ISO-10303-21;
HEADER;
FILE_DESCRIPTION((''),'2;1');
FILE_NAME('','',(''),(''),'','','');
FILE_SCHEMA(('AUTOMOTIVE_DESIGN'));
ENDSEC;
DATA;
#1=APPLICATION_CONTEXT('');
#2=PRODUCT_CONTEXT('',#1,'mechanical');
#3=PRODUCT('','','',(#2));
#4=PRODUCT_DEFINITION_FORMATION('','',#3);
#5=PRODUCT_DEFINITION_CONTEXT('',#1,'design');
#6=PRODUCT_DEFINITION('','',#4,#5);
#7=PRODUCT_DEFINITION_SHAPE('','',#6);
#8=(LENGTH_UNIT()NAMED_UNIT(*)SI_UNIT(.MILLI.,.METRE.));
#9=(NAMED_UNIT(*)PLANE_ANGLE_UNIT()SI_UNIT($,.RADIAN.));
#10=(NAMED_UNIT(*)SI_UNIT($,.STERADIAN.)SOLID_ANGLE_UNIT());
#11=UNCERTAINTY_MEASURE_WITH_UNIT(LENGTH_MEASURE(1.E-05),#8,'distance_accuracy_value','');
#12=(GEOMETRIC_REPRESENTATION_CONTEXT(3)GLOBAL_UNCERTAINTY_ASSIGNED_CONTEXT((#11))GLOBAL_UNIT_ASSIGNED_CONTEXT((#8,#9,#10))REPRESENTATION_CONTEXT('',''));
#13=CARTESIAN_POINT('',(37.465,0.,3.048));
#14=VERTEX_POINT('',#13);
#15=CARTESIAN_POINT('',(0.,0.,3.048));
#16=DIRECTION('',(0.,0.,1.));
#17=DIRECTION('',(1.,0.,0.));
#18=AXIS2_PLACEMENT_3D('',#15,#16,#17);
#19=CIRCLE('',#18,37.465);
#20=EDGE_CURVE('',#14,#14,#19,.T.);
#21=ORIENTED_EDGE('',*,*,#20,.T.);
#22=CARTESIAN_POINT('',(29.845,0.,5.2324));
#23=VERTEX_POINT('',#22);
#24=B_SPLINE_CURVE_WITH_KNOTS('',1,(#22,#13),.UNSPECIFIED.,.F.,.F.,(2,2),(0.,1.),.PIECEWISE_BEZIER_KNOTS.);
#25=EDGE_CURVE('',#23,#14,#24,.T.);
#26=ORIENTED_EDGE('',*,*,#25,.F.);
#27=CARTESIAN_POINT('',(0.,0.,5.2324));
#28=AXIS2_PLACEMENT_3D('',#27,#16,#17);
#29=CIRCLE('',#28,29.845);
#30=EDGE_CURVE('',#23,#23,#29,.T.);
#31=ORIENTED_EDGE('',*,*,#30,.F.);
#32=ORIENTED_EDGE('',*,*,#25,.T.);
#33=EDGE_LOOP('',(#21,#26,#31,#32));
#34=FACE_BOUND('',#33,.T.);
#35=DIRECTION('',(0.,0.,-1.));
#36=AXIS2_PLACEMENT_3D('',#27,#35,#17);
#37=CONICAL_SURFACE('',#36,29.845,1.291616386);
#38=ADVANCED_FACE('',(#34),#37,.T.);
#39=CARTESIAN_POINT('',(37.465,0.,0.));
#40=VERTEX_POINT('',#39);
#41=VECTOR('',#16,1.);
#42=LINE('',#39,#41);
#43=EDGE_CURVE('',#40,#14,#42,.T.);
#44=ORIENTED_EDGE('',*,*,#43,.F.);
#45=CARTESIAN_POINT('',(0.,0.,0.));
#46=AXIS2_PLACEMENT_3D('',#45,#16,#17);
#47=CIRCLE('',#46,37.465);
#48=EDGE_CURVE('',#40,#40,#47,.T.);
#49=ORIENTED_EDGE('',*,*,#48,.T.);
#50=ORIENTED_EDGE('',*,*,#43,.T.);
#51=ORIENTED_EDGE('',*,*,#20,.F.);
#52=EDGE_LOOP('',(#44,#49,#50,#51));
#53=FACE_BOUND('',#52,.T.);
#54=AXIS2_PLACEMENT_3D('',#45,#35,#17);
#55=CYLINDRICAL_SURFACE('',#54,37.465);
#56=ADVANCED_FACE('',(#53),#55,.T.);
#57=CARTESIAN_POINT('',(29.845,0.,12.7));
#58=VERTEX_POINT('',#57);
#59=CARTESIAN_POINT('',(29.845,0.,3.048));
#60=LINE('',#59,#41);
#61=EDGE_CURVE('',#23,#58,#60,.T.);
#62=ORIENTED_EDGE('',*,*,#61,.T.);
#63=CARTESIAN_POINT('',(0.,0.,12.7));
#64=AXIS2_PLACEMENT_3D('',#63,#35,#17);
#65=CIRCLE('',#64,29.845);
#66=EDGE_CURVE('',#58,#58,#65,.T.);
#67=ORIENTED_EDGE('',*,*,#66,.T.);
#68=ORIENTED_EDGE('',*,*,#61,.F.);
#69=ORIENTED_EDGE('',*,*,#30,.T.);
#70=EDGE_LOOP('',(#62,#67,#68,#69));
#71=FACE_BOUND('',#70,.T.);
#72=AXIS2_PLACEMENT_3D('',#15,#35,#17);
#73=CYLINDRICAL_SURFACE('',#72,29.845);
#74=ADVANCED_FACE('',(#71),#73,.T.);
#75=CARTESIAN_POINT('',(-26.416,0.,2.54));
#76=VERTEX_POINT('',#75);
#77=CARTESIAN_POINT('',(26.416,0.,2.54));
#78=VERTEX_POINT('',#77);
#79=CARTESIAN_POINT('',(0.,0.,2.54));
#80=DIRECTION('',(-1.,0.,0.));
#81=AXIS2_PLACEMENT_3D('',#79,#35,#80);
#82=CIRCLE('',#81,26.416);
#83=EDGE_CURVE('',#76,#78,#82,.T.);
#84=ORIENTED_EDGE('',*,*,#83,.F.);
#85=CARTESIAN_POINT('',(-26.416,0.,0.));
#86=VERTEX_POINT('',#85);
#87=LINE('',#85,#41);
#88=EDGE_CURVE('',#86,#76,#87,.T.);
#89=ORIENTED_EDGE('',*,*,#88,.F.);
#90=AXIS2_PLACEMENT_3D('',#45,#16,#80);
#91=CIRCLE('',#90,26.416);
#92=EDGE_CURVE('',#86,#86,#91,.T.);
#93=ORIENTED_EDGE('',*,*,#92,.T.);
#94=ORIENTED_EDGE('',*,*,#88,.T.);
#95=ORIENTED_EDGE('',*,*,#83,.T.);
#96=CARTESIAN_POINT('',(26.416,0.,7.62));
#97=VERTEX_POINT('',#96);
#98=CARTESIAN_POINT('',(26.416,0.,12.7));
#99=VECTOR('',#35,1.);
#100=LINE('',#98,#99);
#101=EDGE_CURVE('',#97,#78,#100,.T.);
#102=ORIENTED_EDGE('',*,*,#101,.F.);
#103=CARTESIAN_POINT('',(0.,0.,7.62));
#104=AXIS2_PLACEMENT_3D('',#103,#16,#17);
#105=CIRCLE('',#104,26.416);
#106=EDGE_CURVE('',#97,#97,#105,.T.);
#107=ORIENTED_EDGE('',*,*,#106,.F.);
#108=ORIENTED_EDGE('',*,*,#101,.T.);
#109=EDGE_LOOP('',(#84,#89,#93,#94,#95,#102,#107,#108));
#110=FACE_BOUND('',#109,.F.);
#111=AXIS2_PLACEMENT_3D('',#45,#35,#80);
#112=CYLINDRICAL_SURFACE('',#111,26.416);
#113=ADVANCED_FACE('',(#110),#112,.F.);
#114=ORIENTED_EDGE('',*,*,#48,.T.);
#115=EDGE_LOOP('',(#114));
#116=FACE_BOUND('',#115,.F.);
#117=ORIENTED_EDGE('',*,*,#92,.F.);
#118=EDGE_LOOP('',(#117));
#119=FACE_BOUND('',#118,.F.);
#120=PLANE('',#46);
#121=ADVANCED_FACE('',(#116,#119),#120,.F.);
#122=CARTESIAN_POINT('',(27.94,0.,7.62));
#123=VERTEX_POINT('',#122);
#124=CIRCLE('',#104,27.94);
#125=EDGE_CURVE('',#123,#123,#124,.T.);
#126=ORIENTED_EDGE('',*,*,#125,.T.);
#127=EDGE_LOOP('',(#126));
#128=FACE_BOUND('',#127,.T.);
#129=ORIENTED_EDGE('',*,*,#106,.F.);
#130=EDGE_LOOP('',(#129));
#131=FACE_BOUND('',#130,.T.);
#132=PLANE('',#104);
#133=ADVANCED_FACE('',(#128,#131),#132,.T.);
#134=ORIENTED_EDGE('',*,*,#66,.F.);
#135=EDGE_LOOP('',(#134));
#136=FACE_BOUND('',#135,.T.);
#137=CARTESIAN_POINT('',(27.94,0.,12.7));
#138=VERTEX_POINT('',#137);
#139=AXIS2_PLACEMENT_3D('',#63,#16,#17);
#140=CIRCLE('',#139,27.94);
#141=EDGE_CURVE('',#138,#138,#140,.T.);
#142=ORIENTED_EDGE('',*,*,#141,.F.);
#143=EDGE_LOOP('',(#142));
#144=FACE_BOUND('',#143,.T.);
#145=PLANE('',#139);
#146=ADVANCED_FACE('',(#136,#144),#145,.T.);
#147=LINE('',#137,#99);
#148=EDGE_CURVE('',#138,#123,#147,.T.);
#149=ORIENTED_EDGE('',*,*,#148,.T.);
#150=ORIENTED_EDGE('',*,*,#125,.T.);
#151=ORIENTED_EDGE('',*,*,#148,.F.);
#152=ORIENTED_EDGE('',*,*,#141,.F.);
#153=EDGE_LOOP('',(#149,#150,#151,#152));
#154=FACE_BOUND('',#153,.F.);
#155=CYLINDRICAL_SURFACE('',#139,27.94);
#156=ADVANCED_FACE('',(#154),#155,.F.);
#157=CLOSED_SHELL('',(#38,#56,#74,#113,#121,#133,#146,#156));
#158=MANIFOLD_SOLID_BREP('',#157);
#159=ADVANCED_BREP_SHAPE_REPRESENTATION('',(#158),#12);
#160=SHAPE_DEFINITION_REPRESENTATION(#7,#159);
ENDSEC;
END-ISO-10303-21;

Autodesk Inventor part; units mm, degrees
ref_plane "YZ Plane" through (0, 0, 0) normal (1, 0, 0) x (0, 1, 0)
ref_plane "XZ Plane" through (0, 0, 0) normal (0, 1, 0) x (-1, 0, 0)
sketch "Sketch1" plane through (0, 0, 0) normal (0, 0, 1) x (1, 0, 0)
  circle A0 centre (0, 0) radius 37.465
  dimension "d0" = 74.93
extrude "Extrusion1" add sketch "Sketch1" along normal blind 12.7
sketch "Sketch3" plane through (0, 0, 12.7) normal (0, 0, 1) x (1, 0, 0)
  circle A0 centre (0, 0) radius 26.289
  dimension "d6" = 52.578
extrude "Extrusion3" cut sketch "Sketch3" against normal blind 2.54
sketch "Sketch4" plane through (0, 0, 0) normal (0, 0, -1) x (-1, 0, 0)
  circle A0 centre (0, 0) radius 26.416
  dimension "d9" = 52.832
extrude "Extrusion4" cut sketch "Sketch4" against normal blind 2.54
ref_plane "Work Plane1" through (0, 0, 12.7) normal (0, 0, 1) x (1, 0, 0)
ref_plane "Work Plane3" through (0, 0, 5.2324) normal (0, 0, 1) x (1, 0, 0)
ref_plane "Work Plane5" through (0, 0, 3.048) normal (0, 0, 1) x (1, 0, 0)
sketch "Sketch9" plane through (0, 0, 5.2324) normal (0, 0, 1) x (1, 0, 0)
  circle A0 centre (0, 0) radius 29.845 projected
sketch "Sketch11" plane through (0, 0, 3.048) normal (0, 0, 1) x (1, 0, 0)
  circle A0 centre (0, 0) radius 29.845
  circle A1 centre (0, 0) radius 37.465
  dimension "d42" = 59.69
  dimension "d43" = 74.93
extrude "Extrusion7" cut sketch "Sketch11" along normal through all
loft "Loft5" add profiles "Sketch9" section 2 edges at (-37.465, 0, 3.048)
sketch "Sketch12" plane through (0, 0, 12.7) normal (0, 0, 1) x (1, 0, 0)
  circle A0 centre (0, 0) radius 27.94
  circle A1 centre (0, 0) radius 26.289
  dimension "d50" = 55.88
extrude "Extrusion8" cut sketch "Sketch12" against normal blind 5.08
sketch "Sketch2" plane through (0, 0, 12.7) normal (0, 0, 1) x (1, 0, 0)
  circle A0 centre (0, 0) radius 26.416
  dimension "d3" = 52.832
extrude "Extrusion2" cut sketch "Sketch2" against normal blind 50.8
properties part number "KF40tube_v3_p1"
